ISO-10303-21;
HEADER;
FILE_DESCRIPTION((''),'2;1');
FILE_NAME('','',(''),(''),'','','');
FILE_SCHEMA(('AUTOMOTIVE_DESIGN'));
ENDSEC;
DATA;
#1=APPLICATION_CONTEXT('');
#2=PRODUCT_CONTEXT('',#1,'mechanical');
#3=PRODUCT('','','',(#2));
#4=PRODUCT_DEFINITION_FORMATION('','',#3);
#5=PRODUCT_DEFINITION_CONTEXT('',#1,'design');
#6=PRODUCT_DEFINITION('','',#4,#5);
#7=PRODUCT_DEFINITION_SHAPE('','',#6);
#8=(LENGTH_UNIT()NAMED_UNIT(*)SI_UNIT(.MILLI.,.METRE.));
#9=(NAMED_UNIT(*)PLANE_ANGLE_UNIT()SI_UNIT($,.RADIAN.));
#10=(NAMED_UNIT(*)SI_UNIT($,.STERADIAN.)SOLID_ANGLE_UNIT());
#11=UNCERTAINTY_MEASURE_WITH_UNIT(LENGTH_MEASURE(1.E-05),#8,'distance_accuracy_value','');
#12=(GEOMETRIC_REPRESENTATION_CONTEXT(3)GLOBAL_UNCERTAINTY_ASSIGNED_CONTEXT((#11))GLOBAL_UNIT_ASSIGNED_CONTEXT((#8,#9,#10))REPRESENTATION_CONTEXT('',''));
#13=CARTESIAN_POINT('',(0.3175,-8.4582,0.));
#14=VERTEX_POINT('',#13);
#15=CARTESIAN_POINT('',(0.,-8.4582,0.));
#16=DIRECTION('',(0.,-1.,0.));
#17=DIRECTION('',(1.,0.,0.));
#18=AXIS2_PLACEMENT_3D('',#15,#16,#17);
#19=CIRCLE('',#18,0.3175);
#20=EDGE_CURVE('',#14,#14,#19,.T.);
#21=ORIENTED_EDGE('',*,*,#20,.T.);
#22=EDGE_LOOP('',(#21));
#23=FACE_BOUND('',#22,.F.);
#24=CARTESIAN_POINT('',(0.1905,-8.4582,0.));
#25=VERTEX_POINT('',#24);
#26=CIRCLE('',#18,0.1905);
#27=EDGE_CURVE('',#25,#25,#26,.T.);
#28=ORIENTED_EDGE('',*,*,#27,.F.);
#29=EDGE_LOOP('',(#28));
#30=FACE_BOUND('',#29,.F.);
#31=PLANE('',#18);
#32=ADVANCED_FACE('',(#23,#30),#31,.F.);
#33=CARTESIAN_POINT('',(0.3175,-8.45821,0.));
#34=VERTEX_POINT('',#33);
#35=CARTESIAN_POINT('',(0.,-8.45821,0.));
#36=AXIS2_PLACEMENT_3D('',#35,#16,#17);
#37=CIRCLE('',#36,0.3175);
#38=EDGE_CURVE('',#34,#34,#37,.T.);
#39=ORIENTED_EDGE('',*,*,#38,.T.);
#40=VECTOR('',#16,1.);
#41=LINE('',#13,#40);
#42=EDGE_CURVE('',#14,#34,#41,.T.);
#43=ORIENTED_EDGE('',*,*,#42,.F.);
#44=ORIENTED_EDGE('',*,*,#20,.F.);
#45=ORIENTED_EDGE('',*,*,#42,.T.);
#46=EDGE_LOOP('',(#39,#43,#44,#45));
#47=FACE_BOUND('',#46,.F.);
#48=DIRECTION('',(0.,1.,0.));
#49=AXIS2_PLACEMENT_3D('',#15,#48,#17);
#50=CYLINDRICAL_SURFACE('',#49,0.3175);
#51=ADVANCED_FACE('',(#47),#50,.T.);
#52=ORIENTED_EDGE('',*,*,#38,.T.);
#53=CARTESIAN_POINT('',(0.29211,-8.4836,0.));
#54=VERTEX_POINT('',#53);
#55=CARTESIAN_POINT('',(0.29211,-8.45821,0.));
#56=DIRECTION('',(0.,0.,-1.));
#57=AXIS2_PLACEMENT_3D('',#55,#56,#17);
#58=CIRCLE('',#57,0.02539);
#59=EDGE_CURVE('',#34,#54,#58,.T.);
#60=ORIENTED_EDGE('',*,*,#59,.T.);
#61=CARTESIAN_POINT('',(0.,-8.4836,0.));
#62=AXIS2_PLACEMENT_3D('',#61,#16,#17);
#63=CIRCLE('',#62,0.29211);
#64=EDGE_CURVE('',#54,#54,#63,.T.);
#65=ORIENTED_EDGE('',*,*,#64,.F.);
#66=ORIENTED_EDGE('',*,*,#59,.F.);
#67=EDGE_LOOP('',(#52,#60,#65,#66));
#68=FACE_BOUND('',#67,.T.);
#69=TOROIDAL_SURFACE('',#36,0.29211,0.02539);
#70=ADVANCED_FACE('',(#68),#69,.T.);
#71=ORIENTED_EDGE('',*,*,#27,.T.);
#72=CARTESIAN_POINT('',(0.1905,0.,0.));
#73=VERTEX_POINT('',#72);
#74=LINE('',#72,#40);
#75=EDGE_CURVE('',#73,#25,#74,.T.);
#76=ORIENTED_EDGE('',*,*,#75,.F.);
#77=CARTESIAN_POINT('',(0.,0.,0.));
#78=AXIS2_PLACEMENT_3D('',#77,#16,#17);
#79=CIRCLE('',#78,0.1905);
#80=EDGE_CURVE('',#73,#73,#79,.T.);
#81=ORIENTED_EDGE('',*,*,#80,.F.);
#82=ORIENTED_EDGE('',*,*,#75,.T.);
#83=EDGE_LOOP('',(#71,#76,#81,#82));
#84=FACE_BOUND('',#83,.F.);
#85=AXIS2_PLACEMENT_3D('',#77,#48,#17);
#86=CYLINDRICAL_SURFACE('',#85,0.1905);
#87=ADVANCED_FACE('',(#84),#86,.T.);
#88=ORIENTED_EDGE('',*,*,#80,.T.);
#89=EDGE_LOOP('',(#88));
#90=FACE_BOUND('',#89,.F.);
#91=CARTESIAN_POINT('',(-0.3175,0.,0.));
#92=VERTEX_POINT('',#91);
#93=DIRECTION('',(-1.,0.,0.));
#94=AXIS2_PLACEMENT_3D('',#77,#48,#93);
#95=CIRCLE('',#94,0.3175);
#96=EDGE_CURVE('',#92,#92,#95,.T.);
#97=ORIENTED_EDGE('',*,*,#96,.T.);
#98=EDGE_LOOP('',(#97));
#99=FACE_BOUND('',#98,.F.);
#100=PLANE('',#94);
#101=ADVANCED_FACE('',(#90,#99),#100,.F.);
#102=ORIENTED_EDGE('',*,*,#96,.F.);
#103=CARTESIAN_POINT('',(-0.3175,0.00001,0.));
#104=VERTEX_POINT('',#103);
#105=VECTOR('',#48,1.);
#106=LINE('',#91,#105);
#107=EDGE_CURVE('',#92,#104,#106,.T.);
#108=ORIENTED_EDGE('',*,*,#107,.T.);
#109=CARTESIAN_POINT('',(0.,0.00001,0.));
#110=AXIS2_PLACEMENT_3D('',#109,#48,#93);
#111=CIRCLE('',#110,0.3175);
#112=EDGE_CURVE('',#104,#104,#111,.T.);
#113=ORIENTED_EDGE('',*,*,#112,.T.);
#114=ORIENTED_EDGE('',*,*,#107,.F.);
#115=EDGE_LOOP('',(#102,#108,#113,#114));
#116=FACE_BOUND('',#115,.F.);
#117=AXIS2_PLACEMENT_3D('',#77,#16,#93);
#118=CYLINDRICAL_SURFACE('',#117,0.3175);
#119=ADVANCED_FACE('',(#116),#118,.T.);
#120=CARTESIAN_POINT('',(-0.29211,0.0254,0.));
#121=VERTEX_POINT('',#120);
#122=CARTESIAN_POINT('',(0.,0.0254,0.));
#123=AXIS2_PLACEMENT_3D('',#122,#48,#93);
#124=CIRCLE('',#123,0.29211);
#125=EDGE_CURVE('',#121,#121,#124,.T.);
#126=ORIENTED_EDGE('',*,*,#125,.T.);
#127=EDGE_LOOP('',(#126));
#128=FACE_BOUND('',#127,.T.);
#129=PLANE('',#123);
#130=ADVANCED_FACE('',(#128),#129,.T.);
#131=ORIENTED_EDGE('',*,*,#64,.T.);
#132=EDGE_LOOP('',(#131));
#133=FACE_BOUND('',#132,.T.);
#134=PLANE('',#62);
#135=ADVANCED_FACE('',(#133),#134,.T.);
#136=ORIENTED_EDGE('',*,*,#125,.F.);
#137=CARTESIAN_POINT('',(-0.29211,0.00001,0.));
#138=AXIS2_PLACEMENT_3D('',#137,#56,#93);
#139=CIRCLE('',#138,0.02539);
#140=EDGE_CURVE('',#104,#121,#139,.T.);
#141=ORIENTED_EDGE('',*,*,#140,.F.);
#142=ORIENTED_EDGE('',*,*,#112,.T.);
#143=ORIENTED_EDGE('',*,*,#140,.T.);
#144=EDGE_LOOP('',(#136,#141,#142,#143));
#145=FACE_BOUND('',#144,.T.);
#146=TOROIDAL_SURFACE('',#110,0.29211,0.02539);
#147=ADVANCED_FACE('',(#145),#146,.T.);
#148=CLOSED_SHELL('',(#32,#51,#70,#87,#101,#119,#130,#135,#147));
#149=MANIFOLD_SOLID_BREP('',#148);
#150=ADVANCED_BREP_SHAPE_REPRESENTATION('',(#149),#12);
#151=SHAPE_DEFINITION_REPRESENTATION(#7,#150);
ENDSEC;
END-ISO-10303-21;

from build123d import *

# Parameters (mm, degrees)
F0_R     = 0.1905
F1_DEPTH = 8.4582
F2_R     = 0.3175
F3_DEPTH = 0.0254
F4_R     = 0.3175
F5_DEPTH = 0.0254
F6_R     = 0.02539
F7_R     = 0.02539


# Not quite as in the source:
# - a fillet or chamfer is up to 0.001 mm smaller than in the source, because OpenCascade refuses the exact size


with BuildPart() as f1:
    # F0 (on Front) → F1 (new body)
    with BuildSketch(Plane.XZ):
        Circle(F0_R)
    extrude(amount=F1_DEPTH)

    # F2 (on face) → F3 (join)
    with BuildSketch(Plane.XZ.offset(8.4582)):
        Circle(F2_R)
    extrude(amount=F3_DEPTH)

    # F4 (on face) → F5 (join)
    with BuildSketch(Plane(origin=(0, 0, 0), x_dir=(-1, 0, 0), z_dir=(0, 1, 0))):
        Circle(F4_R)
    extrude(amount=F5_DEPTH)

    # F6 (radius 0.0254 in the source; OpenCascade refuses exactly that, so slightly less here)
    f6_edges = [f1.edges().sort_by_distance(p)[0] for p in [
        (0.3175, 0.0254, 0),
    ]]
    fillet(f6_edges, radius=F6_R)

    # F7 (radius 0.0254 in the source; OpenCascade refuses exactly that, so slightly less here)
    f7_edges = [f1.edges().sort_by_distance(p)[0] for p in [
        (-0.3175, -8.4836, 0),
    ]]
    fillet(f7_edges, radius=F7_R)


solid = f1.part
